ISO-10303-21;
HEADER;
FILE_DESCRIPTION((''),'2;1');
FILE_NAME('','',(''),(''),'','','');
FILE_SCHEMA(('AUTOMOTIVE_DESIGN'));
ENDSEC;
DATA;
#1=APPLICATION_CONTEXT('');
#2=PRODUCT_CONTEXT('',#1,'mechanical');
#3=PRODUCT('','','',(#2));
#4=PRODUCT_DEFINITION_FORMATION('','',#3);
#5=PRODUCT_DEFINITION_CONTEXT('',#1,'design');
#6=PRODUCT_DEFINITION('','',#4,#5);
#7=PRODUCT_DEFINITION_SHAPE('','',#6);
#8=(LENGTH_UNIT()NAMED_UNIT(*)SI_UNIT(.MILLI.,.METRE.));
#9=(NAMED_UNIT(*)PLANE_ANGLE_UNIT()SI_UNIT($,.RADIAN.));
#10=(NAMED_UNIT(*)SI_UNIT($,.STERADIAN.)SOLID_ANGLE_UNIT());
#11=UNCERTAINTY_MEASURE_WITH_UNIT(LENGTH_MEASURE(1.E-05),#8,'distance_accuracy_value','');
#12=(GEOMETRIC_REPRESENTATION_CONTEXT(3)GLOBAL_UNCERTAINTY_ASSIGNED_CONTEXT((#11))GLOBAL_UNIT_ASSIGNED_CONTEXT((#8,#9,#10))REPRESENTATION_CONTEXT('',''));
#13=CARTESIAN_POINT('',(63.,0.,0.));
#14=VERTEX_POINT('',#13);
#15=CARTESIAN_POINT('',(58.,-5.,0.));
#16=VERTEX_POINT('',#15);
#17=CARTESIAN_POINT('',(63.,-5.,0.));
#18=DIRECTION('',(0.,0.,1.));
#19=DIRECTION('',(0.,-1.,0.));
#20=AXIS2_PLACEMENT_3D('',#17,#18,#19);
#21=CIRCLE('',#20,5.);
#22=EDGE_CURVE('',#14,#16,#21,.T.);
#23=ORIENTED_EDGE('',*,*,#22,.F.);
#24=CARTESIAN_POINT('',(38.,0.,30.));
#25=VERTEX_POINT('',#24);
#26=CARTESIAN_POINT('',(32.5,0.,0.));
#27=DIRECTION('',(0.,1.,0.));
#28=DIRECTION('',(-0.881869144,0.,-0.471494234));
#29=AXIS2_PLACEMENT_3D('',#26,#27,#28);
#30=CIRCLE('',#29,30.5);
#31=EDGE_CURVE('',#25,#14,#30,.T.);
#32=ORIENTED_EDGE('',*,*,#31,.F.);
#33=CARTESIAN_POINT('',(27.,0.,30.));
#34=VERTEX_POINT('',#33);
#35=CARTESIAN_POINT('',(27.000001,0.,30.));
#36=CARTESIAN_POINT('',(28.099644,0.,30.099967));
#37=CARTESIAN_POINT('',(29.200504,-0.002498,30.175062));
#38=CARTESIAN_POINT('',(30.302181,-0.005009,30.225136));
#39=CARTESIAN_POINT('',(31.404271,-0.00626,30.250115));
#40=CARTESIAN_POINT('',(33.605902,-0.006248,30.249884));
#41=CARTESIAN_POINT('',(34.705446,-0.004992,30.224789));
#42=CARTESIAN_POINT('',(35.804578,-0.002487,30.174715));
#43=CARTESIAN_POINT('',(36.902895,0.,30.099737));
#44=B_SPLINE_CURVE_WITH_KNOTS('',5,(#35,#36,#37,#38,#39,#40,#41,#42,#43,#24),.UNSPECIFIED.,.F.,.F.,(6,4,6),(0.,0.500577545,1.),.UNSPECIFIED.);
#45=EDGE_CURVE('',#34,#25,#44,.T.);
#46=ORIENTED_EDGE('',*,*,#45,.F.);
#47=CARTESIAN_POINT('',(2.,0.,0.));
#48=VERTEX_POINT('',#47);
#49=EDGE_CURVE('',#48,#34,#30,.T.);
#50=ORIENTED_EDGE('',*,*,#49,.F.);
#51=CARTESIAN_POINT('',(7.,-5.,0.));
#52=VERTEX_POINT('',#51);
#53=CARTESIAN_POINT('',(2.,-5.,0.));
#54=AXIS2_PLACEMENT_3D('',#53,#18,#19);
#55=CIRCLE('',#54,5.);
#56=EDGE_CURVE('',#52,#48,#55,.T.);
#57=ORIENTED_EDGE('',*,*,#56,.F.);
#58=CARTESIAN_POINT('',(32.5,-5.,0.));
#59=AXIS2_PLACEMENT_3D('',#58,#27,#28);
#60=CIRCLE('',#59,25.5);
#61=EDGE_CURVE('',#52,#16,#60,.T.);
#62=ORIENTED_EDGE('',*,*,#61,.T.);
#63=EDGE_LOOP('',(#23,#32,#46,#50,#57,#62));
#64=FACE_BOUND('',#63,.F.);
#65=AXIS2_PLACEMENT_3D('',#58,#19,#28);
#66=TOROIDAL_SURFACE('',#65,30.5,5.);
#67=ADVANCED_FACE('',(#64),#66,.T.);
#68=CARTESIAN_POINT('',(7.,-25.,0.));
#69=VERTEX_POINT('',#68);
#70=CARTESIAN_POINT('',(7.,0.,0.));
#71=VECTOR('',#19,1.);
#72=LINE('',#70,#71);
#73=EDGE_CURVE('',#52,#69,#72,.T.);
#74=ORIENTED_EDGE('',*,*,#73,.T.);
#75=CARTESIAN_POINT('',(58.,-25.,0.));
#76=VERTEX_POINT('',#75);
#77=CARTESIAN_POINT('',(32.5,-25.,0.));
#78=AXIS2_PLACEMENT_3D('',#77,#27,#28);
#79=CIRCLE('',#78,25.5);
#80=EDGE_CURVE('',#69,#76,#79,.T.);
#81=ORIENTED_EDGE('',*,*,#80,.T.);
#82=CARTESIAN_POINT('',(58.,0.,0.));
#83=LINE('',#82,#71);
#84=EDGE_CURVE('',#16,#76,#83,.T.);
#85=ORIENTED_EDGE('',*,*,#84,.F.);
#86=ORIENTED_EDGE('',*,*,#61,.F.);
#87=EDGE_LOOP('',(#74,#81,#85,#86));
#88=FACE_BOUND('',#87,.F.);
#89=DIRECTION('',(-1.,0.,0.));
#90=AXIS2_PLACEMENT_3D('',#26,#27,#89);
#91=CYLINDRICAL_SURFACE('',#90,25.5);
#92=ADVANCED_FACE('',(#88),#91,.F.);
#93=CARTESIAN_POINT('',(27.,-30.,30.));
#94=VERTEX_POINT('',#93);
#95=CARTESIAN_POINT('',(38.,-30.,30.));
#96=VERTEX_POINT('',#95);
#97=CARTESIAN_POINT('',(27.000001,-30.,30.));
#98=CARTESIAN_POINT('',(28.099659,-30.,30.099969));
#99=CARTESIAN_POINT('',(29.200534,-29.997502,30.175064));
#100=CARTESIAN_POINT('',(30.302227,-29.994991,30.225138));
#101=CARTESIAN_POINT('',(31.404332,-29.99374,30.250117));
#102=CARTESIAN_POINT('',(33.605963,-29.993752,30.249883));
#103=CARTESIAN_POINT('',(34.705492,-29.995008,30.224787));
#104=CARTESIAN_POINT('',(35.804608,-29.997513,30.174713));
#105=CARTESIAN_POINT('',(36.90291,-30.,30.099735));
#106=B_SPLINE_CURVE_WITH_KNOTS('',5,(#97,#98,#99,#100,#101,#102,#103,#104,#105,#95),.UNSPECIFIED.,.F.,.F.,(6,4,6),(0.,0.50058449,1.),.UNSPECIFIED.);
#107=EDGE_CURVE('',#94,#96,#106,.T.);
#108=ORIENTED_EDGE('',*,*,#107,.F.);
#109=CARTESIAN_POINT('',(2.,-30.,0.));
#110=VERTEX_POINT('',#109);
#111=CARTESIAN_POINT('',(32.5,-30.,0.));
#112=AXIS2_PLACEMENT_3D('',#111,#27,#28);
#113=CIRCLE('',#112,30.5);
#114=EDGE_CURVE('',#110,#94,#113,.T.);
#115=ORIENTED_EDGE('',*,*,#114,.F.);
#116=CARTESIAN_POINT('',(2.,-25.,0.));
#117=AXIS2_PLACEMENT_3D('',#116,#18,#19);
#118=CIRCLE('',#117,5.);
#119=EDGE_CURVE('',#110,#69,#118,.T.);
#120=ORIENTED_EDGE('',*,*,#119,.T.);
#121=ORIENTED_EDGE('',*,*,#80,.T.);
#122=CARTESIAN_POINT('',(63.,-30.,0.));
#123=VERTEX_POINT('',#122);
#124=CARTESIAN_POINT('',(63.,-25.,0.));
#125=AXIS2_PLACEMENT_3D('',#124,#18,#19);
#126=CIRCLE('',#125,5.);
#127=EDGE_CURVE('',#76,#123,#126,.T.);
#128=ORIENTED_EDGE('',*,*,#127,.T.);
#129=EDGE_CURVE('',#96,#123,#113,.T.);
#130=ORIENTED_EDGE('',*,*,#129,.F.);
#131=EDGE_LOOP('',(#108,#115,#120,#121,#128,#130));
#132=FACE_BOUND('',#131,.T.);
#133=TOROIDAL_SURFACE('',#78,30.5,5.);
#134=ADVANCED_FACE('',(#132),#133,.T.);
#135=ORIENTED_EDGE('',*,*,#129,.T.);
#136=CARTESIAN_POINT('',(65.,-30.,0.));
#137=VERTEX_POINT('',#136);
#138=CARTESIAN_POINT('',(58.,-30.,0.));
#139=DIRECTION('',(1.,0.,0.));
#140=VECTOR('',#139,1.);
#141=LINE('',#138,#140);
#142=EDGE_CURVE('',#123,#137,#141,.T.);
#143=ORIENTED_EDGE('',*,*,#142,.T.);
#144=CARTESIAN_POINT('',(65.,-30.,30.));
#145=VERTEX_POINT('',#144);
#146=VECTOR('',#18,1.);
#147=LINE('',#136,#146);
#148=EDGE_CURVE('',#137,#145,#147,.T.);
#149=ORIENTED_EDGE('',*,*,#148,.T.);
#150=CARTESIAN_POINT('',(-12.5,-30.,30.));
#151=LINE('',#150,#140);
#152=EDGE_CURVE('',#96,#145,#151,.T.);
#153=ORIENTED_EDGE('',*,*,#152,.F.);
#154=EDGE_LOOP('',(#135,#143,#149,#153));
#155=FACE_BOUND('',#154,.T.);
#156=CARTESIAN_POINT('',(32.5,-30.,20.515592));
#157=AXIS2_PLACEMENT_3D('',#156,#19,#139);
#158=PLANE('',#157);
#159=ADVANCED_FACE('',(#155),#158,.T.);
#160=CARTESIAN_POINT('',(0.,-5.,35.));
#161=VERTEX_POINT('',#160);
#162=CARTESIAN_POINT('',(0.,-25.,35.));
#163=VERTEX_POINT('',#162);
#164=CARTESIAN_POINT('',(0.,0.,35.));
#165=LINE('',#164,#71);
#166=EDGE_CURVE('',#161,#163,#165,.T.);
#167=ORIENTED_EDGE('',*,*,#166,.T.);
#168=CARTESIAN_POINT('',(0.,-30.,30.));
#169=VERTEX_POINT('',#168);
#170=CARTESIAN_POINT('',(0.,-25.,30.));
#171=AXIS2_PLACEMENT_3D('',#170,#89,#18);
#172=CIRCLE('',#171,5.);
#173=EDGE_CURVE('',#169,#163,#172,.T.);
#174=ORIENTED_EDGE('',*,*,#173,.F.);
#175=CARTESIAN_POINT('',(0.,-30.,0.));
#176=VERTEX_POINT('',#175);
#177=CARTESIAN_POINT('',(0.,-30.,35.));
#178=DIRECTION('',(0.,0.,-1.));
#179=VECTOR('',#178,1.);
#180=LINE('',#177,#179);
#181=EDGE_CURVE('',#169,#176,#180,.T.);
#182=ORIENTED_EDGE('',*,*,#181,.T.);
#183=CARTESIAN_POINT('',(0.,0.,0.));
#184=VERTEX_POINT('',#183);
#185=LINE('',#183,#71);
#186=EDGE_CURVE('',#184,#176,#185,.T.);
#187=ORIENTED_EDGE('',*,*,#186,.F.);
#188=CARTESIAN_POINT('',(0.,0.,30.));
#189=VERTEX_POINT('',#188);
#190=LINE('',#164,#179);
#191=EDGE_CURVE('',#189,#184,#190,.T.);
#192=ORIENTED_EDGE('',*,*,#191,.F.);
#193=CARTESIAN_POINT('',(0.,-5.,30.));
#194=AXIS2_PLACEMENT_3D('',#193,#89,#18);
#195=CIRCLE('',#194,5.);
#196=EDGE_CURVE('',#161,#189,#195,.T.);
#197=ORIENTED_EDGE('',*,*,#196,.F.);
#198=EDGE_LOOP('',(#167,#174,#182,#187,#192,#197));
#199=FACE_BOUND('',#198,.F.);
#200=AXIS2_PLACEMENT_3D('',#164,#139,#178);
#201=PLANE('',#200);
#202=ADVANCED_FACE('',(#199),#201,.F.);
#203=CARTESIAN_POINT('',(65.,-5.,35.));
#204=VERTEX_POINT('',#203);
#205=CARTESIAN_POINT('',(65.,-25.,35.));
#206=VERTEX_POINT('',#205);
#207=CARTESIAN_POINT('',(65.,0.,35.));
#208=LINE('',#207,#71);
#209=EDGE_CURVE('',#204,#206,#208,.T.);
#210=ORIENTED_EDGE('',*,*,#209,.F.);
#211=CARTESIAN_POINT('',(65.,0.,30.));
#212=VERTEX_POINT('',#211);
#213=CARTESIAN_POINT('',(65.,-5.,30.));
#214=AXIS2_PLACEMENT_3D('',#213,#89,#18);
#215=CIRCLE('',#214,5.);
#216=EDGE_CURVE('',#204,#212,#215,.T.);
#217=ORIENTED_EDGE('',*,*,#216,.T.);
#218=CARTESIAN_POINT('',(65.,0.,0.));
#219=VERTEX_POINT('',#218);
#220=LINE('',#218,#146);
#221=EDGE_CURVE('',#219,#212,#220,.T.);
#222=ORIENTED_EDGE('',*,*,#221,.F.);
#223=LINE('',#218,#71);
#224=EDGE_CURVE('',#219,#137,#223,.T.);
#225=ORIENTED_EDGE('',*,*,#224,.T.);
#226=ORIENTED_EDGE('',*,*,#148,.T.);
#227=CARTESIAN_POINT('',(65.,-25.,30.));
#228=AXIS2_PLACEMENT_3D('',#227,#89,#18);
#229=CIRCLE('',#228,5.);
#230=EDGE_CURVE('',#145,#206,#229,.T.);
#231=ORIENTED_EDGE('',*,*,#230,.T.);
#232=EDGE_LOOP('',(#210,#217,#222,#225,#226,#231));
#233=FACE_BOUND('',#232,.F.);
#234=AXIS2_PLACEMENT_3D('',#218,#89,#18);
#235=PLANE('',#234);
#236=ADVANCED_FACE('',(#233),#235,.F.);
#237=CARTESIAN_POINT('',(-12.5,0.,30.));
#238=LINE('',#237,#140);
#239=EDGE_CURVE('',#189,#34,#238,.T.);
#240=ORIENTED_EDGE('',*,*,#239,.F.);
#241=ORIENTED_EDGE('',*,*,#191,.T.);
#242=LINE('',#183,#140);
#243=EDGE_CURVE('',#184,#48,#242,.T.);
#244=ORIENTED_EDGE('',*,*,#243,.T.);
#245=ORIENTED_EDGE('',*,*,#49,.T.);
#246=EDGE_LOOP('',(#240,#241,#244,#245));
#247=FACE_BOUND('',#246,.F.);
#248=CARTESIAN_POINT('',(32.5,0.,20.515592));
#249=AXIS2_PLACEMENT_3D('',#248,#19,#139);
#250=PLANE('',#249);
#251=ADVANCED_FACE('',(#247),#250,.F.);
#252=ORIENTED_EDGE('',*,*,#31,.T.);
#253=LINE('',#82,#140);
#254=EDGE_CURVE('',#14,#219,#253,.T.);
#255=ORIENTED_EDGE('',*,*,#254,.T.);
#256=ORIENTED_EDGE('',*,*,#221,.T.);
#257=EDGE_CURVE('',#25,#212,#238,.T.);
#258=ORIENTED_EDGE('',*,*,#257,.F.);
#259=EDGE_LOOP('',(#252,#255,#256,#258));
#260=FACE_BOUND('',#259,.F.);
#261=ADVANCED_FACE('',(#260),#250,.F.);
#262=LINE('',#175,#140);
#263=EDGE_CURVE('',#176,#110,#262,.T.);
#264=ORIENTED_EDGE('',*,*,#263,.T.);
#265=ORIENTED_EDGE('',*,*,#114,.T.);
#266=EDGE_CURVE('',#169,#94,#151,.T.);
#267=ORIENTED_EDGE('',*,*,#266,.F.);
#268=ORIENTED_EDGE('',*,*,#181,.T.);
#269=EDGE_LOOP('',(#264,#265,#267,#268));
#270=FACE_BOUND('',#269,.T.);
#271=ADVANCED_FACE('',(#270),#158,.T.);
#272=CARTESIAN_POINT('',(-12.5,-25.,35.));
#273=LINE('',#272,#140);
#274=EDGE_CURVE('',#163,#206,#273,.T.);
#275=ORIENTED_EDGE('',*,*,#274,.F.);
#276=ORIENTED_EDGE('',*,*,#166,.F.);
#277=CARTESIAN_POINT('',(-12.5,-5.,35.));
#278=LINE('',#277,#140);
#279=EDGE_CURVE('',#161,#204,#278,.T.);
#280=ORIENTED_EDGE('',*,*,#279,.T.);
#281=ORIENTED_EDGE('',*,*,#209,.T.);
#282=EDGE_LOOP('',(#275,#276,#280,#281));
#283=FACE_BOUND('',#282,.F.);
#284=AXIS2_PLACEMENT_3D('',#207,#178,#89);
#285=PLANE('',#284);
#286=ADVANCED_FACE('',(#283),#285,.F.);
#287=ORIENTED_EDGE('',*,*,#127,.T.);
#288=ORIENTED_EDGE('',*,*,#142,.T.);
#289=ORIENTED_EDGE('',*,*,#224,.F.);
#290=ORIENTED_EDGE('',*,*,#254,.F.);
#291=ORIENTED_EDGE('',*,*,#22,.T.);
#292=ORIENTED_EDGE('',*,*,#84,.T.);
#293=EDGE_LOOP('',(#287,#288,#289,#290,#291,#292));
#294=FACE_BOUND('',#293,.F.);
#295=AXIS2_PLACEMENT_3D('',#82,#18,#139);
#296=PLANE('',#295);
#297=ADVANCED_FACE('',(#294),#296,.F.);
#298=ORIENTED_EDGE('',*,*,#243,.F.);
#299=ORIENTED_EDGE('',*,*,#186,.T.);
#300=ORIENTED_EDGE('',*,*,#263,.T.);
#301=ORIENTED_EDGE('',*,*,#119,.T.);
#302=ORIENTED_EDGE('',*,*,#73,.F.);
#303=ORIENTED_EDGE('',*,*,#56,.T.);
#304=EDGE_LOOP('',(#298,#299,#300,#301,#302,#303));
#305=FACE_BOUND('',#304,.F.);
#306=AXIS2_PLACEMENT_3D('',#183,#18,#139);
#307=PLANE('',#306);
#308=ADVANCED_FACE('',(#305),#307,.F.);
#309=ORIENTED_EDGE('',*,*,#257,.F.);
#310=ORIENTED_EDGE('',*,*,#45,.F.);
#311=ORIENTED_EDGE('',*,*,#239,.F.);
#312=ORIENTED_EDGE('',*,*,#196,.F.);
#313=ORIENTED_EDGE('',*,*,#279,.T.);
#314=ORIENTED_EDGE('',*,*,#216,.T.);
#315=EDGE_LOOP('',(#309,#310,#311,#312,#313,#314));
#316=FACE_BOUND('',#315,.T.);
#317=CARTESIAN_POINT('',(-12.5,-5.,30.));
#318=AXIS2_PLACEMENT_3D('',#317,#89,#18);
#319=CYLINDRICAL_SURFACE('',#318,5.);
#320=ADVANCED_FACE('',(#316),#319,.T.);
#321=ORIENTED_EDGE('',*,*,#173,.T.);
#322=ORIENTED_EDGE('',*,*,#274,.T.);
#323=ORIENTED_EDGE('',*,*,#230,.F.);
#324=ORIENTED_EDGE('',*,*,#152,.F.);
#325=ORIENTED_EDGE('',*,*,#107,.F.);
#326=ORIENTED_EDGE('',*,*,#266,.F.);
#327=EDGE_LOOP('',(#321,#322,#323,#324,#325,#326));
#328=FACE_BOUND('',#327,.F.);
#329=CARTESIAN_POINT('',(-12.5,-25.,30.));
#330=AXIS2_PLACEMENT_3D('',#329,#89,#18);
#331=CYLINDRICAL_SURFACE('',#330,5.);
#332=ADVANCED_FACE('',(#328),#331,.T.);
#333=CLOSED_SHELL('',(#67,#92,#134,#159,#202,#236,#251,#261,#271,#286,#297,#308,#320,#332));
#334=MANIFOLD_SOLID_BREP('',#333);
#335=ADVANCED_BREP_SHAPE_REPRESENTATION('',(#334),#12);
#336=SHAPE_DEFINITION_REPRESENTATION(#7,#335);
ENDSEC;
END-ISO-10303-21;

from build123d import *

# Parameters (mm, degrees)
F1_DEPTH    = 30
F2_T1_DEPTH = 90
F2_T4_ANGLE = 236.2626685885
F2_T6_ANGLE = 236.2626685885


# Not quite as in the source:
# - a fillet or chamfer that OpenCascade refuses, or shapes differently, is made with other operations: its cross-section is extruded or revolved along the edge and cut away or added


with BuildPart() as f1:
    # F0 (on Front) → F1 (new body)
    with BuildSketch(Plane.XZ):
        with BuildLine():
            Line((0, 35), (0, 0))
            Line((0, 0), (7, 0))
            ThreePointArc((7, 0), (32.5, 25.5), (58, 0))
            Line((58, 0), (65, 0))
            Line((65, 0), (65, 35))
            Line((65, 35), (0, 35))
        make_face()
    extrude(amount=F1_DEPTH)

    # F2: fillet of radius 5 on 4 edges, made by hand

    # F2_s2 → F2_t1 (cut)
    with BuildSketch(Plane.YZ.offset(-12.5)):
        with BuildLine():
            ThreePointArc((-25, 35), (-28.5355339059, 33.5355339059), (-30, 30))
            Line((-30, 30), (-30, 35))
            Line((-30, 35), (-25, 35))
        make_face()
        with BuildLine():
            ThreePointArc((-5, 35), (-1.4644660941, 33.5355339059), (0, 30))
            Line((0, 30), (0, 35))
            Line((0, 35), (-5, 35))
        make_face()
    extrude(amount=F2_T1_DEPTH, mode=Mode.SUBTRACT)

    # F2_s3 → F2_t4 (revolve, cut)
    with BuildSketch(Plane(origin=(7.2249714164, 0, -13.5133770415), x_dir=(0, 1, 0), z_dir=(0.4714942341, 0, -0.881869144))):
        with BuildLine():
            ThreePointArc((-25, 3.1607471809), (-28.5355339059, 1.6962810868), (-30, -1.8392528191))
            Line((-30, -1.8392528191), (-30, 3.1607471809))
            Line((-30, 3.1607471809), (-25, 3.1607471809))
        make_face()
    revolve(axis=Axis((32.5, -30, 0), (0, 1, 0)), revolution_arc=F2_T4_ANGLE, mode=Mode.SUBTRACT)

    # F2_s5 → F2_t6 (revolve, cut)
    with BuildSketch(Plane(origin=(7.2249714164, 0, -13.5133770415), x_dir=(0, 1, 0), z_dir=(0.4714942341, 0, -0.881869144))):
        with BuildLine():
            ThreePointArc((-5, 3.1607471809), (-1.4644660941, 1.6962810868), (0, -1.8392528191))
            Line((0, -1.8392528191), (0, 3.1607471809))
            Line((0, 3.1607471809), (-5, 3.1607471809))
        make_face()
    revolve(axis=Axis((32.5, 0, 0), (0, 1, 0)), revolution_arc=F2_T6_ANGLE, mode=Mode.SUBTRACT)


solid = f1.part
